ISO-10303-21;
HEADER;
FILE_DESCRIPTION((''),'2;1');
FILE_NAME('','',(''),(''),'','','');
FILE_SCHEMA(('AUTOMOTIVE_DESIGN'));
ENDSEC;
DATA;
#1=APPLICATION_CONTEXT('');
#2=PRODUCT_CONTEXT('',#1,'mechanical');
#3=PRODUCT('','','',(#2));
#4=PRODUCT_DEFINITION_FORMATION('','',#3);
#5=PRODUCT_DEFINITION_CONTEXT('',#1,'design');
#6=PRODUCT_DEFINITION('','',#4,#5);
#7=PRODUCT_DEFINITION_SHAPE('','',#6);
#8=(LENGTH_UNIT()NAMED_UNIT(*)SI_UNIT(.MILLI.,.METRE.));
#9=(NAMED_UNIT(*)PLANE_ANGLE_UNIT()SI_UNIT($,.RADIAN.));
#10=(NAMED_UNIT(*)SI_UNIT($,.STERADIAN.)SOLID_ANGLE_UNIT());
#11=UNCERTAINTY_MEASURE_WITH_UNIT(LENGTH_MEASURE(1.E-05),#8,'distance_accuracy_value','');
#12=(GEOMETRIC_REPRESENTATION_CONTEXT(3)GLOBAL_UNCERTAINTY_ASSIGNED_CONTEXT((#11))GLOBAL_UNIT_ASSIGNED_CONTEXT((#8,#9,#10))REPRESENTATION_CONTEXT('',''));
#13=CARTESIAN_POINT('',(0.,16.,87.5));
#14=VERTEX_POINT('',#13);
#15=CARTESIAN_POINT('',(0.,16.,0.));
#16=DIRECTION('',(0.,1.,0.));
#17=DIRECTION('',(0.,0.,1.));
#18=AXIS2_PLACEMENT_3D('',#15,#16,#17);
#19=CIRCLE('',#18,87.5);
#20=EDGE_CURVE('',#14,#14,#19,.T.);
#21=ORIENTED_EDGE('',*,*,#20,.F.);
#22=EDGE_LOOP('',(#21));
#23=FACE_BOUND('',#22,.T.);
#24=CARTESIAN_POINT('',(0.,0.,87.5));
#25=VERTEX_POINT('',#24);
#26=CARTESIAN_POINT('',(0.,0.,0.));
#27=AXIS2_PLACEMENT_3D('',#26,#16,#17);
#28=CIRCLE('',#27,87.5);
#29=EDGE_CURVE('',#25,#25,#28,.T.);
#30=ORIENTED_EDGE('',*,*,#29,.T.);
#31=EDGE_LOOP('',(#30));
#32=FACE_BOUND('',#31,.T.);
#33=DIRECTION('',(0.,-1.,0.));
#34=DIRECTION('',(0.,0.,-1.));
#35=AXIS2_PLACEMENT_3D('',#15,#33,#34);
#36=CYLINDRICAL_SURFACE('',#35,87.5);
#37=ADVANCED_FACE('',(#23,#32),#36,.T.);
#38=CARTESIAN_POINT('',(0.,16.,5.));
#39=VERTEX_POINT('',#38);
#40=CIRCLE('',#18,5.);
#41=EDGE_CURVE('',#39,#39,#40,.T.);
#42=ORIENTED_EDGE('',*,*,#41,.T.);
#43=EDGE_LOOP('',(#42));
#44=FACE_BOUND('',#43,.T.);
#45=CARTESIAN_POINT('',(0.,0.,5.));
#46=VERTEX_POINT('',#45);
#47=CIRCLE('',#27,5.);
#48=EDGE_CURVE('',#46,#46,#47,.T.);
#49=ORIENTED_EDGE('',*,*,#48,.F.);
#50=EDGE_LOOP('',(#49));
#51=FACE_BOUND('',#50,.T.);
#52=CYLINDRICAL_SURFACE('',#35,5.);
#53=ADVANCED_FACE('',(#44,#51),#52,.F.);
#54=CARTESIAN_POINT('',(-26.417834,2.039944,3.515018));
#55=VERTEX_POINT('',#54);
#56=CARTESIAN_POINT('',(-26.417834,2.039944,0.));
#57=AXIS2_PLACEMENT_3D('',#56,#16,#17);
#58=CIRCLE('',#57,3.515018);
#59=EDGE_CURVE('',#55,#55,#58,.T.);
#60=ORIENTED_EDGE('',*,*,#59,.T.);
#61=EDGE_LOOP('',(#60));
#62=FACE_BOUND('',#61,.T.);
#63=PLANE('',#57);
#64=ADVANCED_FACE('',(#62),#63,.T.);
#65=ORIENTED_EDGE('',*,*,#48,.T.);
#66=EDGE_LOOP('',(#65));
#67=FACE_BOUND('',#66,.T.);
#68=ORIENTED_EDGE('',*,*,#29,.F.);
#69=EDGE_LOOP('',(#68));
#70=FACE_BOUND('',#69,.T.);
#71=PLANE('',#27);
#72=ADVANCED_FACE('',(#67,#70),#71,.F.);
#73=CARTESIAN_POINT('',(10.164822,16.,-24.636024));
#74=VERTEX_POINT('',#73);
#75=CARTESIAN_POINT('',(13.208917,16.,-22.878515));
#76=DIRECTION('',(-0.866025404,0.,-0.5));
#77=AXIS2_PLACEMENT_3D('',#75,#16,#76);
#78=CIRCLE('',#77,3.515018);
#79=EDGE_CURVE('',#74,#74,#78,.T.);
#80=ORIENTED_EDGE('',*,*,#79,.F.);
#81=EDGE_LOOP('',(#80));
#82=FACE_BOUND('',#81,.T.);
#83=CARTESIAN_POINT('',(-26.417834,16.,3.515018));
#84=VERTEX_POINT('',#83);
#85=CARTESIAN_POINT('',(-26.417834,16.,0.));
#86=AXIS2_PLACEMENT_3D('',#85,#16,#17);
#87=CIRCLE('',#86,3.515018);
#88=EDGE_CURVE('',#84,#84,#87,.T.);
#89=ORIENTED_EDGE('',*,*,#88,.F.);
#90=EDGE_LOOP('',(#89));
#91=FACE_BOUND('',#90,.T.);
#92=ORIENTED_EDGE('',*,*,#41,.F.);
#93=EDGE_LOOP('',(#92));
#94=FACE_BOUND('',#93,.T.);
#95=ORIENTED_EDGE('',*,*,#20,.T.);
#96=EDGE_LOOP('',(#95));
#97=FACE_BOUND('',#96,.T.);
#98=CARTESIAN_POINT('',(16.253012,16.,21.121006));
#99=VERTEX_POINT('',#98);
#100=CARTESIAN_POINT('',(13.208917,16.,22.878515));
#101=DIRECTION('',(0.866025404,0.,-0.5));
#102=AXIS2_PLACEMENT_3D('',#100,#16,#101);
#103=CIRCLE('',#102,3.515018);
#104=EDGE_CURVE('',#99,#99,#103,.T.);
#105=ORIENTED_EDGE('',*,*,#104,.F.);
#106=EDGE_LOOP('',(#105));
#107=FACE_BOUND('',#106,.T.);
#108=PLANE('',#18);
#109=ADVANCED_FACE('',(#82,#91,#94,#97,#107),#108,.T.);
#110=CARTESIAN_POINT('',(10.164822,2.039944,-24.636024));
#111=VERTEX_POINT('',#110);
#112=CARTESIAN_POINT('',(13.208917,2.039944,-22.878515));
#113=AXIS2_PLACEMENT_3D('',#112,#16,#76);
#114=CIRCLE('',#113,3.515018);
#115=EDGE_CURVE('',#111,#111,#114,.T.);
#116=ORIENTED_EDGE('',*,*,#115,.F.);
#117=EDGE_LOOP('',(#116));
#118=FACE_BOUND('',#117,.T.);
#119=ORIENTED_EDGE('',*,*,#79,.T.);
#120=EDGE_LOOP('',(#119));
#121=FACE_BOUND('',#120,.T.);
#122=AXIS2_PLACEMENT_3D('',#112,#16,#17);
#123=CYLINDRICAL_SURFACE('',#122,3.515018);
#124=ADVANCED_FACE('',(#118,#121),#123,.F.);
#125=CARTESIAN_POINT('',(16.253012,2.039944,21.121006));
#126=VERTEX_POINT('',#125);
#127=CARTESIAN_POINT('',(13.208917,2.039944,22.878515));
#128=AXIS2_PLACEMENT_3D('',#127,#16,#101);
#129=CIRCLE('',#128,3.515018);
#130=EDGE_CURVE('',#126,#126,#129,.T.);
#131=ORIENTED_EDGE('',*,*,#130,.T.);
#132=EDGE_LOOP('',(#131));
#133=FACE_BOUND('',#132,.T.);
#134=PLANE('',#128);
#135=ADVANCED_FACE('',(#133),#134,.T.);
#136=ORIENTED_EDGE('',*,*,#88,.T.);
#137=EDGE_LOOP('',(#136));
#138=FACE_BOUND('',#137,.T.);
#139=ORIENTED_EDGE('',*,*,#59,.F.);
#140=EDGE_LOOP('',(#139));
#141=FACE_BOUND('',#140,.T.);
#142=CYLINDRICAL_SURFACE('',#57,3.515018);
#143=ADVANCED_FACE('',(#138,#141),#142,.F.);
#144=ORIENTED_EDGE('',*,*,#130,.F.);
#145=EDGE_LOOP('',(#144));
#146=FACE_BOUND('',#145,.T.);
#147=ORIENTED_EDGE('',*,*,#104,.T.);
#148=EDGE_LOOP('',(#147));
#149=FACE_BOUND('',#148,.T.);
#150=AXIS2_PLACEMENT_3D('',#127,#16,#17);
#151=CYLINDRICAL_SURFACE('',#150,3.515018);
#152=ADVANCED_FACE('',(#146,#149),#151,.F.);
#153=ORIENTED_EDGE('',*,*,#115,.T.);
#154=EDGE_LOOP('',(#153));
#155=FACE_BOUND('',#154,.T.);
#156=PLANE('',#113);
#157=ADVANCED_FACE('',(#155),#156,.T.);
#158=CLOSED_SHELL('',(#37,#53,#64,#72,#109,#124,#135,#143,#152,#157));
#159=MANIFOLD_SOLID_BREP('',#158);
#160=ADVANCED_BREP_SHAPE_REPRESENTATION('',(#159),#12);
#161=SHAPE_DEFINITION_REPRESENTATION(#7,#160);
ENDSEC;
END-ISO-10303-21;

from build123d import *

# Parameters (mm, degrees)
SKETCH1_R           = 87.5
BOSS_EXTRUDE1_DEPTH = 16
SKETCH2_R           = 5
CUT_EXTRUDE1_DEPTH  = 125.773795326
SKETCH3_R           = 3.515018004
CUT_EXTRUDE2_DEPTH  = 13.960056072
CIRPATTERN1_COUNT   = 3


with BuildPart() as part:
    # Sketch1 → Boss-Extrude1 (new body)
    with BuildSketch(Plane(origin=(0, 0, 0), x_dir=(1, 0, 0), z_dir=(0, 1, 0))):
        Circle(SKETCH1_R)
    extrude(amount=BOSS_EXTRUDE1_DEPTH)

    # Sketch2 → Cut-Extrude1 (cut, through all)
    with BuildSketch(Plane(origin=(0, 0, 0), x_dir=(1, 0, 0), z_dir=(0, 1, 0))):
        Circle(SKETCH2_R)
    extrude(amount=CUT_EXTRUDE1_DEPTH, mode=Mode.SUBTRACT)

    # Sketch3 → Cut-Extrude2 (cut)
    with BuildSketch(Plane(origin=(0, 16, 0), x_dir=(1, 0, 0), z_dir=(0, 1, 0))):
        with Locations((-26.41783364, 0)):
            Circle(SKETCH3_R)
    cut_extrude2 = extrude(amount=-CUT_EXTRUDE2_DEPTH, mode=Mode.SUBTRACT)

    # CirPattern1: Cut-Extrude2 ×3 about axis
    cirpattern1_axis = Axis((0, 0, 0), (0, 1, 0))
    for i in range(1, CIRPATTERN1_COUNT):
        add(cut_extrude2.rotate(cirpattern1_axis, i * 360 / CIRPATTERN1_COUNT), mode=Mode.SUBTRACT)


solid = part.part
